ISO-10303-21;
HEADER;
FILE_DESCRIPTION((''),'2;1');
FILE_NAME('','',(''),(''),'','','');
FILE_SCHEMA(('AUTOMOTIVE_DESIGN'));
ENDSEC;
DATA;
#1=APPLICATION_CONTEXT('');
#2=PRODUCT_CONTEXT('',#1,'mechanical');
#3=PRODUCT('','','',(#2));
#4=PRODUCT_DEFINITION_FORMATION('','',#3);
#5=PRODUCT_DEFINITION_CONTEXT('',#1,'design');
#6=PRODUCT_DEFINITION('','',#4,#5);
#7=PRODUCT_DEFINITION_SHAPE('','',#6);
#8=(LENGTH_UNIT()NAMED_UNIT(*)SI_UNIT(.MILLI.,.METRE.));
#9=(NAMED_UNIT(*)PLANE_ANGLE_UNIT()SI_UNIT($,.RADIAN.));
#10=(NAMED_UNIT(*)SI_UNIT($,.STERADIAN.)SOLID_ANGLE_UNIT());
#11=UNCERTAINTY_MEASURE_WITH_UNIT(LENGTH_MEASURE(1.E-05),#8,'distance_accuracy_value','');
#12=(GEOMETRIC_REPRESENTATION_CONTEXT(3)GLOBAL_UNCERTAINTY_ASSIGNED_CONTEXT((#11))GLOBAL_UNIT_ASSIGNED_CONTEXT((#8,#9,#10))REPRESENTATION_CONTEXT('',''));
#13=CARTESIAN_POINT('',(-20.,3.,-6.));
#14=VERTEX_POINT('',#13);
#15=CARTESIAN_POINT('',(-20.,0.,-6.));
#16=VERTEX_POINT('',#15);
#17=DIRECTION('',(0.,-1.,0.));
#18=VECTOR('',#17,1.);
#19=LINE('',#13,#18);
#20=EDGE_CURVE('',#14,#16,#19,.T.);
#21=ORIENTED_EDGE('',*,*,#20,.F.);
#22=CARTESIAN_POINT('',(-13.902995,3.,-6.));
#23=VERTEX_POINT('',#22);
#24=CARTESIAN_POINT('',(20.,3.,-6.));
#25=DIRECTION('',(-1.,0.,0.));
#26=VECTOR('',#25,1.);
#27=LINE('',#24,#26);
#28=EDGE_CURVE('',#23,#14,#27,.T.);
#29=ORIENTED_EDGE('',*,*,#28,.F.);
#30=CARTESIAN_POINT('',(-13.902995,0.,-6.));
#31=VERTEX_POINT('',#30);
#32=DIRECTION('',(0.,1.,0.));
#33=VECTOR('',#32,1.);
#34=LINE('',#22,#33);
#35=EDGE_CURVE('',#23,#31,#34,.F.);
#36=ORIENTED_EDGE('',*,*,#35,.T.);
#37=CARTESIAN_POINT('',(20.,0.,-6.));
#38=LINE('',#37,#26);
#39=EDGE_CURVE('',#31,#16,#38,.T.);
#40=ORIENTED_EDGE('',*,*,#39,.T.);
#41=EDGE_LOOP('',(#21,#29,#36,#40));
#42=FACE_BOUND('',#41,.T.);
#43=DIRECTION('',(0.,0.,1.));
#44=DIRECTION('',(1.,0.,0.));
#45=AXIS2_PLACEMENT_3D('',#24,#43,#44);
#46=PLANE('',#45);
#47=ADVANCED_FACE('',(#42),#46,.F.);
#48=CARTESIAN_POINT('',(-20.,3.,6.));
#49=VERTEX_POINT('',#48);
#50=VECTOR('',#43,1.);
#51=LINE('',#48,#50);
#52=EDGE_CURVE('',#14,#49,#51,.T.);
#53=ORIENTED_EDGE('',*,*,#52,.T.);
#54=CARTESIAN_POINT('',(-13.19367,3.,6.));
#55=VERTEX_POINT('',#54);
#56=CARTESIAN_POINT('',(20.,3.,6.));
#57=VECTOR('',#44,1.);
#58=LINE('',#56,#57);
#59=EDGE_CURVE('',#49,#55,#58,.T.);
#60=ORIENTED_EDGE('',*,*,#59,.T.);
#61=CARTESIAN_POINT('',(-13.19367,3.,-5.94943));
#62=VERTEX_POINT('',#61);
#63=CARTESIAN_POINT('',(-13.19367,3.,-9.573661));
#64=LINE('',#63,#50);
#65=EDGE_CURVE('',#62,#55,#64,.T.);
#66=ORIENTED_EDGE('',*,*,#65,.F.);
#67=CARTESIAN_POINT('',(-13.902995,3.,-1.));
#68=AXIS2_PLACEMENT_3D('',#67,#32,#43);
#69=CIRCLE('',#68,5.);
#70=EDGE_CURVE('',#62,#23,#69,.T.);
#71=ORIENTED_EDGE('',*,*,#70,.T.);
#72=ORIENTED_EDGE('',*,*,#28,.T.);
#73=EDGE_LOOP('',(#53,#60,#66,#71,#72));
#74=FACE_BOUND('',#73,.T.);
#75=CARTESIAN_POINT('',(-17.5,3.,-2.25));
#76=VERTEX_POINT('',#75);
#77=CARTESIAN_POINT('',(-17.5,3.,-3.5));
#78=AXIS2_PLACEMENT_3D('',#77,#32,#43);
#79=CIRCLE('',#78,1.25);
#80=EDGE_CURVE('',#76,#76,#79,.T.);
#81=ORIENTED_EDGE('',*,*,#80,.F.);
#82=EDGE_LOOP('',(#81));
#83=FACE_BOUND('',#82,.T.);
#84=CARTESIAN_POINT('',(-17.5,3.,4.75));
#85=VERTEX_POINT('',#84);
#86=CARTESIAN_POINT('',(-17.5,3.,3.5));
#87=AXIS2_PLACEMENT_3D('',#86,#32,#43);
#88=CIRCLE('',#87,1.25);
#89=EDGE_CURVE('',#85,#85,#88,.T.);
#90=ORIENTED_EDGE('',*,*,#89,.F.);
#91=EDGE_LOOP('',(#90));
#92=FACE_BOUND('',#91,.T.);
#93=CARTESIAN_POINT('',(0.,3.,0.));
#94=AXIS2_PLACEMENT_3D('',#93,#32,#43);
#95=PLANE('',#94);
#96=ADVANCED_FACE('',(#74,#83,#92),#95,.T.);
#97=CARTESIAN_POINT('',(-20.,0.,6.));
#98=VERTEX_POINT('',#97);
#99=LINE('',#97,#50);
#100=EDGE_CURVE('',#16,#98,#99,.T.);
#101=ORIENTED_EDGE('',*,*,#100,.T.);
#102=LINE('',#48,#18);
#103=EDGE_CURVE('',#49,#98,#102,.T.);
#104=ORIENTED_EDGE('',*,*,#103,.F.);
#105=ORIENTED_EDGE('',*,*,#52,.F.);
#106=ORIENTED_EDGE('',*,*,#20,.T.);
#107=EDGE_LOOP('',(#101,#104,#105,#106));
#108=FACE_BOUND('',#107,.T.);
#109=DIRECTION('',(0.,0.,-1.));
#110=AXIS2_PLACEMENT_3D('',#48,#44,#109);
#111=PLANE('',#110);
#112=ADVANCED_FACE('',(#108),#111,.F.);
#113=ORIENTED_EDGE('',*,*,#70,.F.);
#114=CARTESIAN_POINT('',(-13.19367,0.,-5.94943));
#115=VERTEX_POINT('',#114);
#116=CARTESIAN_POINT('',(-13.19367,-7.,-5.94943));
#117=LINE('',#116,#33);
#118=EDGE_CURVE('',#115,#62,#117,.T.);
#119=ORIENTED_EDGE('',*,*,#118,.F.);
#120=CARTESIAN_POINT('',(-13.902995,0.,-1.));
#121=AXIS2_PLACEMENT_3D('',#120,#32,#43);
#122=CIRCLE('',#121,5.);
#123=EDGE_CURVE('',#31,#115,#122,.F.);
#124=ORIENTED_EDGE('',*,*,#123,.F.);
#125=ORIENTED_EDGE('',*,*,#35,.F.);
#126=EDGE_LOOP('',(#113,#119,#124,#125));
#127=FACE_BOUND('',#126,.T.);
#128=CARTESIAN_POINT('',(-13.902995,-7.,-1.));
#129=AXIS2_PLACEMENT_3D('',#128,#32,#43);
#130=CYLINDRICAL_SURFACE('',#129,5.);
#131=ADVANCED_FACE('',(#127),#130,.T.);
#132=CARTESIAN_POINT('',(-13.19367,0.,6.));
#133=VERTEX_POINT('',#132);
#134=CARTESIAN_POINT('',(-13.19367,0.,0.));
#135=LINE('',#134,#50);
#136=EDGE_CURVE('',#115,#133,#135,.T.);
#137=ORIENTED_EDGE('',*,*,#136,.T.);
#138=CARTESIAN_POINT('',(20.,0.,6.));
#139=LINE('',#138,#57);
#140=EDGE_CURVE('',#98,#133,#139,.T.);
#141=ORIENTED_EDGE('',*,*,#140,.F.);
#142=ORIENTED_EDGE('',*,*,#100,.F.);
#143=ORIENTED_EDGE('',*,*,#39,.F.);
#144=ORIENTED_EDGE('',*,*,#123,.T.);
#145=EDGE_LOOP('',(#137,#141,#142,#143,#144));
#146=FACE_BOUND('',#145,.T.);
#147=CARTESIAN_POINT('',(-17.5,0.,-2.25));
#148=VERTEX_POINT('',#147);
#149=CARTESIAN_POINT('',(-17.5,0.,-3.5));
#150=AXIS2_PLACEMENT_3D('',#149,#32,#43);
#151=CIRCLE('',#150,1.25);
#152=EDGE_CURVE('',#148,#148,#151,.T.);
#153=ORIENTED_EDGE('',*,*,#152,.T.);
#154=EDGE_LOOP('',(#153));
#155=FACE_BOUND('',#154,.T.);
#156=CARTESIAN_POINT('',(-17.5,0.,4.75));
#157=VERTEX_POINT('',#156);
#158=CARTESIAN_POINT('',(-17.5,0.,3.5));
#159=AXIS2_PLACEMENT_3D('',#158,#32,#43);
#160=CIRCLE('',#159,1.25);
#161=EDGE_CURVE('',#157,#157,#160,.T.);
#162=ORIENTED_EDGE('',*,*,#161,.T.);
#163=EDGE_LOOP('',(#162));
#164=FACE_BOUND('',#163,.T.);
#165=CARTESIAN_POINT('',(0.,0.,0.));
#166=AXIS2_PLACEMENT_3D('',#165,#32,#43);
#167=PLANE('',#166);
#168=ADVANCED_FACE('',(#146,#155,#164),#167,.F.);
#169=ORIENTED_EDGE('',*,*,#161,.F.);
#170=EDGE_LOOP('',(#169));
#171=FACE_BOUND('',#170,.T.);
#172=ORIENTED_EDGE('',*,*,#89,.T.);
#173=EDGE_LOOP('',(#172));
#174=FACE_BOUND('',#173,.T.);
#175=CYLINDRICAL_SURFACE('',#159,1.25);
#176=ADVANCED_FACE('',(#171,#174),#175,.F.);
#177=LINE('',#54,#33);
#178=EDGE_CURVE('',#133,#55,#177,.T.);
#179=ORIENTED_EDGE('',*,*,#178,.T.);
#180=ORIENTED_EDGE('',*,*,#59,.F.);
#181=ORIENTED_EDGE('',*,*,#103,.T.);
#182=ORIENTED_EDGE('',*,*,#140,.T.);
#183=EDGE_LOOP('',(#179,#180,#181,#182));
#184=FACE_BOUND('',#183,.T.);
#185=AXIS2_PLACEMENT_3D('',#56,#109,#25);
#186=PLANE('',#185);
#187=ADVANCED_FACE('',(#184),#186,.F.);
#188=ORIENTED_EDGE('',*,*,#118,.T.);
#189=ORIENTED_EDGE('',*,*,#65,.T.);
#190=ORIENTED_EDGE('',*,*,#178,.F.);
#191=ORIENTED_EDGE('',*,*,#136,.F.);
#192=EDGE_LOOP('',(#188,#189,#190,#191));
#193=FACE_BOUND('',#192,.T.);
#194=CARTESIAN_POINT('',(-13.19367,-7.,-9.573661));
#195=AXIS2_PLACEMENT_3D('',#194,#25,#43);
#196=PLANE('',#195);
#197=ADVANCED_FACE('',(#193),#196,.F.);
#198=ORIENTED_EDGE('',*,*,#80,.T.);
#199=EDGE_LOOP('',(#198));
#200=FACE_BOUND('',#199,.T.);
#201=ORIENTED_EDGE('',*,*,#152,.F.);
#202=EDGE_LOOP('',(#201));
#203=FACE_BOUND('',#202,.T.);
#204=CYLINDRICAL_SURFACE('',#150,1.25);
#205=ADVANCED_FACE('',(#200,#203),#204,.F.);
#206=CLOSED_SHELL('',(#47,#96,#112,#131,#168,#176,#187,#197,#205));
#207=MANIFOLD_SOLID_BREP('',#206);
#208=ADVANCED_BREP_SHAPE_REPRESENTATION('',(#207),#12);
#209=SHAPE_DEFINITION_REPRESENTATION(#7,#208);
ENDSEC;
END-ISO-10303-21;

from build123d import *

# Parameters (mm, degrees)
SKETCH1_W           = 40
SKETCH1_H           = 12
BOSS_EXTRUDE1_DEPTH = 3
SKETCH3_R           = 1.25
CUT_EXTRUDE2_DEPTH  = 22.09502311
CUT_EXTRUDE3_DEPTH  = 10
FILLET2_R           = 5
FILLET3_R           = 1
FILLET4_R           = 5
FILLET5_R           = 5
SKETCH6_W           = 35.954210482
SKETCH6_H           = 25.866097198
CUT_EXTRUDE4_DEPTH  = 10


with BuildPart() as part:
    # Sketch1 → Boss-Extrude1 (new body)
    with BuildSketch(Plane(origin=(0, 0, 0), x_dir=(1, 0, 0), z_dir=(0, 1, 0))):
        Rectangle(SKETCH1_W, SKETCH1_H)
    extrude(amount=BOSS_EXTRUDE1_DEPTH)

    # Sketch3 → Cut-Extrude2 (cut, through all)
    with BuildSketch(Plane(origin=(0, 3, 0), x_dir=(1, 0, 0), z_dir=(0, 1, 0))):
        with Locations(Location((-17.5, 3.5, 0), (0, 0, 270))):
            Circle(SKETCH3_R)
        with Locations(Location((-17.5, -3.5, 0), (0, 0, 270))):
            Circle(SKETCH3_R)
    extrude(amount=-CUT_EXTRUDE2_DEPTH, mode=Mode.SUBTRACT)

    # Sketch5 → Cut-Extrude3 (cut)
    with BuildSketch(Plane(origin=(0, 3, 0), x_dir=(1, 0, 0), z_dir=(0, 1, 0))):
        with BuildLine():
            Line((-13.458222524, 6), (20, 0))
            Line((20, 0), (20, -6))
            Line((20, -6), (17.030073052, -6))
            ThreePointArc((17.030073052, -6), (7.671541519, -2.617819669), (-2.144608615, -4.250134828))
            Line((-2.144608615, -4.250134828), (-6.569653649, -6))
            Line((-6.569653649, -6), (-13.458222524, -6))
            Line((-13.458222524, -6), (-13.458222524, -10.237178745))
            Line((-13.458222524, -10.237178745), (26.023482417, -9.726914384))
            Line((26.023482417, -9.726914384), (26.023482417, 8.477274399))
            Line((26.023482417, 8.477274399), (-13.458222524, 8.477274399))
            Line((-13.458222524, 8.477274399), (-13.458222524, 6))
        make_face()
    extrude(amount=-CUT_EXTRUDE3_DEPTH, mode=Mode.SUBTRACT)

    # Fillet2
    # the kernel refuses this fillet: 5 mm, written as the material it takes off along each edge
    with BuildSketch(Plane(origin=(-6.569653649, 5.381801612, 6), x_dir=(-1, 0, 0), z_dir=(0, -1, 0))) as fillet2_piece_1:
        with BuildLine():
            CenterArc((FILLET2_R * 0.190544128998, FILLET2_R), FILLET2_R, 248.423891744, 21.576108256)
            Line((-FILLET2_R * 0.17719268457, FILLET2_R * 0.0700700908417), (0, 0))
            Line((0, 0), (FILLET2_R * 0.190544128998, 0))
        make_face()
    extrude(amount=7.763603225, mode=Mode.SUBTRACT)
    with BuildSketch(Plane(origin=(-2.144608615, 3.259446384, 4.250134828), x_dir=(-0.9299299091583175, 0, 0.36773681356753396), z_dir=(0, -1, 0))) as fillet2_piece_2:
        with BuildLine():
            CenterArc((0.103778554, 5), FILLET2_R, 267.749266862, 2.250733138)
            ThreePointArc((-0.092584454, 0.003857331), (-0.046289955, 0.001983199), (0, 0))
            Line((0, 0), (0.103778554, 0))
        make_face()
    extrude(amount=3.518892769, mode=Mode.SUBTRACT)
    with BuildSketch(Plane(origin=(17.030073052, 6.64587884, 6), x_dir=(1, 0, 0), z_dir=(0, -1, 0))) as fillet2_piece_3:
        with BuildLine():
            CenterArc((1.458351536, -5), FILLET2_R, 90, 30.730822568)
            ThreePointArc((-1.096675494, -0.70211251), (-0.542524687, -0.360136055), (0, 0))
            Line((0, 0), (1.458351536, 0))
        make_face()
    extrude(amount=10.291757681, mode=Mode.SUBTRACT)

    # Fillet3
    fillet3_edges = [part.edges().sort_by_distance(p)[0] for p in [
        (20, 1.5, 6),
    ]]
    fillet(fillet3_edges, radius=FILLET3_R)

    # Fillet4
    fillet4_edges = [part.edges().sort_by_distance(p)[0] for p in [
        (20, 1.5, 0),
    ]]
    fillet(fillet4_edges, radius=FILLET4_R)

    # Fillet5
    fillet5_edges = [part.edges().sort_by_distance(p)[0] for p in [
        (-13.458222524, 1.5, -6),
    ]]
    fillet(fillet5_edges, radius=FILLET5_R)

    # Sketch6 → Cut-Extrude4 (cut)
    with BuildSketch(Plane(origin=(0, 3, 0), x_dir=(1, 0, 0), z_dir=(0, 1, 0))):
        with Locations((4.783435461, -3.359387953)):
            Rectangle(SKETCH6_W, SKETCH6_H)
    extrude(amount=-CUT_EXTRUDE4_DEPTH, mode=Mode.SUBTRACT)


solid = part.part
